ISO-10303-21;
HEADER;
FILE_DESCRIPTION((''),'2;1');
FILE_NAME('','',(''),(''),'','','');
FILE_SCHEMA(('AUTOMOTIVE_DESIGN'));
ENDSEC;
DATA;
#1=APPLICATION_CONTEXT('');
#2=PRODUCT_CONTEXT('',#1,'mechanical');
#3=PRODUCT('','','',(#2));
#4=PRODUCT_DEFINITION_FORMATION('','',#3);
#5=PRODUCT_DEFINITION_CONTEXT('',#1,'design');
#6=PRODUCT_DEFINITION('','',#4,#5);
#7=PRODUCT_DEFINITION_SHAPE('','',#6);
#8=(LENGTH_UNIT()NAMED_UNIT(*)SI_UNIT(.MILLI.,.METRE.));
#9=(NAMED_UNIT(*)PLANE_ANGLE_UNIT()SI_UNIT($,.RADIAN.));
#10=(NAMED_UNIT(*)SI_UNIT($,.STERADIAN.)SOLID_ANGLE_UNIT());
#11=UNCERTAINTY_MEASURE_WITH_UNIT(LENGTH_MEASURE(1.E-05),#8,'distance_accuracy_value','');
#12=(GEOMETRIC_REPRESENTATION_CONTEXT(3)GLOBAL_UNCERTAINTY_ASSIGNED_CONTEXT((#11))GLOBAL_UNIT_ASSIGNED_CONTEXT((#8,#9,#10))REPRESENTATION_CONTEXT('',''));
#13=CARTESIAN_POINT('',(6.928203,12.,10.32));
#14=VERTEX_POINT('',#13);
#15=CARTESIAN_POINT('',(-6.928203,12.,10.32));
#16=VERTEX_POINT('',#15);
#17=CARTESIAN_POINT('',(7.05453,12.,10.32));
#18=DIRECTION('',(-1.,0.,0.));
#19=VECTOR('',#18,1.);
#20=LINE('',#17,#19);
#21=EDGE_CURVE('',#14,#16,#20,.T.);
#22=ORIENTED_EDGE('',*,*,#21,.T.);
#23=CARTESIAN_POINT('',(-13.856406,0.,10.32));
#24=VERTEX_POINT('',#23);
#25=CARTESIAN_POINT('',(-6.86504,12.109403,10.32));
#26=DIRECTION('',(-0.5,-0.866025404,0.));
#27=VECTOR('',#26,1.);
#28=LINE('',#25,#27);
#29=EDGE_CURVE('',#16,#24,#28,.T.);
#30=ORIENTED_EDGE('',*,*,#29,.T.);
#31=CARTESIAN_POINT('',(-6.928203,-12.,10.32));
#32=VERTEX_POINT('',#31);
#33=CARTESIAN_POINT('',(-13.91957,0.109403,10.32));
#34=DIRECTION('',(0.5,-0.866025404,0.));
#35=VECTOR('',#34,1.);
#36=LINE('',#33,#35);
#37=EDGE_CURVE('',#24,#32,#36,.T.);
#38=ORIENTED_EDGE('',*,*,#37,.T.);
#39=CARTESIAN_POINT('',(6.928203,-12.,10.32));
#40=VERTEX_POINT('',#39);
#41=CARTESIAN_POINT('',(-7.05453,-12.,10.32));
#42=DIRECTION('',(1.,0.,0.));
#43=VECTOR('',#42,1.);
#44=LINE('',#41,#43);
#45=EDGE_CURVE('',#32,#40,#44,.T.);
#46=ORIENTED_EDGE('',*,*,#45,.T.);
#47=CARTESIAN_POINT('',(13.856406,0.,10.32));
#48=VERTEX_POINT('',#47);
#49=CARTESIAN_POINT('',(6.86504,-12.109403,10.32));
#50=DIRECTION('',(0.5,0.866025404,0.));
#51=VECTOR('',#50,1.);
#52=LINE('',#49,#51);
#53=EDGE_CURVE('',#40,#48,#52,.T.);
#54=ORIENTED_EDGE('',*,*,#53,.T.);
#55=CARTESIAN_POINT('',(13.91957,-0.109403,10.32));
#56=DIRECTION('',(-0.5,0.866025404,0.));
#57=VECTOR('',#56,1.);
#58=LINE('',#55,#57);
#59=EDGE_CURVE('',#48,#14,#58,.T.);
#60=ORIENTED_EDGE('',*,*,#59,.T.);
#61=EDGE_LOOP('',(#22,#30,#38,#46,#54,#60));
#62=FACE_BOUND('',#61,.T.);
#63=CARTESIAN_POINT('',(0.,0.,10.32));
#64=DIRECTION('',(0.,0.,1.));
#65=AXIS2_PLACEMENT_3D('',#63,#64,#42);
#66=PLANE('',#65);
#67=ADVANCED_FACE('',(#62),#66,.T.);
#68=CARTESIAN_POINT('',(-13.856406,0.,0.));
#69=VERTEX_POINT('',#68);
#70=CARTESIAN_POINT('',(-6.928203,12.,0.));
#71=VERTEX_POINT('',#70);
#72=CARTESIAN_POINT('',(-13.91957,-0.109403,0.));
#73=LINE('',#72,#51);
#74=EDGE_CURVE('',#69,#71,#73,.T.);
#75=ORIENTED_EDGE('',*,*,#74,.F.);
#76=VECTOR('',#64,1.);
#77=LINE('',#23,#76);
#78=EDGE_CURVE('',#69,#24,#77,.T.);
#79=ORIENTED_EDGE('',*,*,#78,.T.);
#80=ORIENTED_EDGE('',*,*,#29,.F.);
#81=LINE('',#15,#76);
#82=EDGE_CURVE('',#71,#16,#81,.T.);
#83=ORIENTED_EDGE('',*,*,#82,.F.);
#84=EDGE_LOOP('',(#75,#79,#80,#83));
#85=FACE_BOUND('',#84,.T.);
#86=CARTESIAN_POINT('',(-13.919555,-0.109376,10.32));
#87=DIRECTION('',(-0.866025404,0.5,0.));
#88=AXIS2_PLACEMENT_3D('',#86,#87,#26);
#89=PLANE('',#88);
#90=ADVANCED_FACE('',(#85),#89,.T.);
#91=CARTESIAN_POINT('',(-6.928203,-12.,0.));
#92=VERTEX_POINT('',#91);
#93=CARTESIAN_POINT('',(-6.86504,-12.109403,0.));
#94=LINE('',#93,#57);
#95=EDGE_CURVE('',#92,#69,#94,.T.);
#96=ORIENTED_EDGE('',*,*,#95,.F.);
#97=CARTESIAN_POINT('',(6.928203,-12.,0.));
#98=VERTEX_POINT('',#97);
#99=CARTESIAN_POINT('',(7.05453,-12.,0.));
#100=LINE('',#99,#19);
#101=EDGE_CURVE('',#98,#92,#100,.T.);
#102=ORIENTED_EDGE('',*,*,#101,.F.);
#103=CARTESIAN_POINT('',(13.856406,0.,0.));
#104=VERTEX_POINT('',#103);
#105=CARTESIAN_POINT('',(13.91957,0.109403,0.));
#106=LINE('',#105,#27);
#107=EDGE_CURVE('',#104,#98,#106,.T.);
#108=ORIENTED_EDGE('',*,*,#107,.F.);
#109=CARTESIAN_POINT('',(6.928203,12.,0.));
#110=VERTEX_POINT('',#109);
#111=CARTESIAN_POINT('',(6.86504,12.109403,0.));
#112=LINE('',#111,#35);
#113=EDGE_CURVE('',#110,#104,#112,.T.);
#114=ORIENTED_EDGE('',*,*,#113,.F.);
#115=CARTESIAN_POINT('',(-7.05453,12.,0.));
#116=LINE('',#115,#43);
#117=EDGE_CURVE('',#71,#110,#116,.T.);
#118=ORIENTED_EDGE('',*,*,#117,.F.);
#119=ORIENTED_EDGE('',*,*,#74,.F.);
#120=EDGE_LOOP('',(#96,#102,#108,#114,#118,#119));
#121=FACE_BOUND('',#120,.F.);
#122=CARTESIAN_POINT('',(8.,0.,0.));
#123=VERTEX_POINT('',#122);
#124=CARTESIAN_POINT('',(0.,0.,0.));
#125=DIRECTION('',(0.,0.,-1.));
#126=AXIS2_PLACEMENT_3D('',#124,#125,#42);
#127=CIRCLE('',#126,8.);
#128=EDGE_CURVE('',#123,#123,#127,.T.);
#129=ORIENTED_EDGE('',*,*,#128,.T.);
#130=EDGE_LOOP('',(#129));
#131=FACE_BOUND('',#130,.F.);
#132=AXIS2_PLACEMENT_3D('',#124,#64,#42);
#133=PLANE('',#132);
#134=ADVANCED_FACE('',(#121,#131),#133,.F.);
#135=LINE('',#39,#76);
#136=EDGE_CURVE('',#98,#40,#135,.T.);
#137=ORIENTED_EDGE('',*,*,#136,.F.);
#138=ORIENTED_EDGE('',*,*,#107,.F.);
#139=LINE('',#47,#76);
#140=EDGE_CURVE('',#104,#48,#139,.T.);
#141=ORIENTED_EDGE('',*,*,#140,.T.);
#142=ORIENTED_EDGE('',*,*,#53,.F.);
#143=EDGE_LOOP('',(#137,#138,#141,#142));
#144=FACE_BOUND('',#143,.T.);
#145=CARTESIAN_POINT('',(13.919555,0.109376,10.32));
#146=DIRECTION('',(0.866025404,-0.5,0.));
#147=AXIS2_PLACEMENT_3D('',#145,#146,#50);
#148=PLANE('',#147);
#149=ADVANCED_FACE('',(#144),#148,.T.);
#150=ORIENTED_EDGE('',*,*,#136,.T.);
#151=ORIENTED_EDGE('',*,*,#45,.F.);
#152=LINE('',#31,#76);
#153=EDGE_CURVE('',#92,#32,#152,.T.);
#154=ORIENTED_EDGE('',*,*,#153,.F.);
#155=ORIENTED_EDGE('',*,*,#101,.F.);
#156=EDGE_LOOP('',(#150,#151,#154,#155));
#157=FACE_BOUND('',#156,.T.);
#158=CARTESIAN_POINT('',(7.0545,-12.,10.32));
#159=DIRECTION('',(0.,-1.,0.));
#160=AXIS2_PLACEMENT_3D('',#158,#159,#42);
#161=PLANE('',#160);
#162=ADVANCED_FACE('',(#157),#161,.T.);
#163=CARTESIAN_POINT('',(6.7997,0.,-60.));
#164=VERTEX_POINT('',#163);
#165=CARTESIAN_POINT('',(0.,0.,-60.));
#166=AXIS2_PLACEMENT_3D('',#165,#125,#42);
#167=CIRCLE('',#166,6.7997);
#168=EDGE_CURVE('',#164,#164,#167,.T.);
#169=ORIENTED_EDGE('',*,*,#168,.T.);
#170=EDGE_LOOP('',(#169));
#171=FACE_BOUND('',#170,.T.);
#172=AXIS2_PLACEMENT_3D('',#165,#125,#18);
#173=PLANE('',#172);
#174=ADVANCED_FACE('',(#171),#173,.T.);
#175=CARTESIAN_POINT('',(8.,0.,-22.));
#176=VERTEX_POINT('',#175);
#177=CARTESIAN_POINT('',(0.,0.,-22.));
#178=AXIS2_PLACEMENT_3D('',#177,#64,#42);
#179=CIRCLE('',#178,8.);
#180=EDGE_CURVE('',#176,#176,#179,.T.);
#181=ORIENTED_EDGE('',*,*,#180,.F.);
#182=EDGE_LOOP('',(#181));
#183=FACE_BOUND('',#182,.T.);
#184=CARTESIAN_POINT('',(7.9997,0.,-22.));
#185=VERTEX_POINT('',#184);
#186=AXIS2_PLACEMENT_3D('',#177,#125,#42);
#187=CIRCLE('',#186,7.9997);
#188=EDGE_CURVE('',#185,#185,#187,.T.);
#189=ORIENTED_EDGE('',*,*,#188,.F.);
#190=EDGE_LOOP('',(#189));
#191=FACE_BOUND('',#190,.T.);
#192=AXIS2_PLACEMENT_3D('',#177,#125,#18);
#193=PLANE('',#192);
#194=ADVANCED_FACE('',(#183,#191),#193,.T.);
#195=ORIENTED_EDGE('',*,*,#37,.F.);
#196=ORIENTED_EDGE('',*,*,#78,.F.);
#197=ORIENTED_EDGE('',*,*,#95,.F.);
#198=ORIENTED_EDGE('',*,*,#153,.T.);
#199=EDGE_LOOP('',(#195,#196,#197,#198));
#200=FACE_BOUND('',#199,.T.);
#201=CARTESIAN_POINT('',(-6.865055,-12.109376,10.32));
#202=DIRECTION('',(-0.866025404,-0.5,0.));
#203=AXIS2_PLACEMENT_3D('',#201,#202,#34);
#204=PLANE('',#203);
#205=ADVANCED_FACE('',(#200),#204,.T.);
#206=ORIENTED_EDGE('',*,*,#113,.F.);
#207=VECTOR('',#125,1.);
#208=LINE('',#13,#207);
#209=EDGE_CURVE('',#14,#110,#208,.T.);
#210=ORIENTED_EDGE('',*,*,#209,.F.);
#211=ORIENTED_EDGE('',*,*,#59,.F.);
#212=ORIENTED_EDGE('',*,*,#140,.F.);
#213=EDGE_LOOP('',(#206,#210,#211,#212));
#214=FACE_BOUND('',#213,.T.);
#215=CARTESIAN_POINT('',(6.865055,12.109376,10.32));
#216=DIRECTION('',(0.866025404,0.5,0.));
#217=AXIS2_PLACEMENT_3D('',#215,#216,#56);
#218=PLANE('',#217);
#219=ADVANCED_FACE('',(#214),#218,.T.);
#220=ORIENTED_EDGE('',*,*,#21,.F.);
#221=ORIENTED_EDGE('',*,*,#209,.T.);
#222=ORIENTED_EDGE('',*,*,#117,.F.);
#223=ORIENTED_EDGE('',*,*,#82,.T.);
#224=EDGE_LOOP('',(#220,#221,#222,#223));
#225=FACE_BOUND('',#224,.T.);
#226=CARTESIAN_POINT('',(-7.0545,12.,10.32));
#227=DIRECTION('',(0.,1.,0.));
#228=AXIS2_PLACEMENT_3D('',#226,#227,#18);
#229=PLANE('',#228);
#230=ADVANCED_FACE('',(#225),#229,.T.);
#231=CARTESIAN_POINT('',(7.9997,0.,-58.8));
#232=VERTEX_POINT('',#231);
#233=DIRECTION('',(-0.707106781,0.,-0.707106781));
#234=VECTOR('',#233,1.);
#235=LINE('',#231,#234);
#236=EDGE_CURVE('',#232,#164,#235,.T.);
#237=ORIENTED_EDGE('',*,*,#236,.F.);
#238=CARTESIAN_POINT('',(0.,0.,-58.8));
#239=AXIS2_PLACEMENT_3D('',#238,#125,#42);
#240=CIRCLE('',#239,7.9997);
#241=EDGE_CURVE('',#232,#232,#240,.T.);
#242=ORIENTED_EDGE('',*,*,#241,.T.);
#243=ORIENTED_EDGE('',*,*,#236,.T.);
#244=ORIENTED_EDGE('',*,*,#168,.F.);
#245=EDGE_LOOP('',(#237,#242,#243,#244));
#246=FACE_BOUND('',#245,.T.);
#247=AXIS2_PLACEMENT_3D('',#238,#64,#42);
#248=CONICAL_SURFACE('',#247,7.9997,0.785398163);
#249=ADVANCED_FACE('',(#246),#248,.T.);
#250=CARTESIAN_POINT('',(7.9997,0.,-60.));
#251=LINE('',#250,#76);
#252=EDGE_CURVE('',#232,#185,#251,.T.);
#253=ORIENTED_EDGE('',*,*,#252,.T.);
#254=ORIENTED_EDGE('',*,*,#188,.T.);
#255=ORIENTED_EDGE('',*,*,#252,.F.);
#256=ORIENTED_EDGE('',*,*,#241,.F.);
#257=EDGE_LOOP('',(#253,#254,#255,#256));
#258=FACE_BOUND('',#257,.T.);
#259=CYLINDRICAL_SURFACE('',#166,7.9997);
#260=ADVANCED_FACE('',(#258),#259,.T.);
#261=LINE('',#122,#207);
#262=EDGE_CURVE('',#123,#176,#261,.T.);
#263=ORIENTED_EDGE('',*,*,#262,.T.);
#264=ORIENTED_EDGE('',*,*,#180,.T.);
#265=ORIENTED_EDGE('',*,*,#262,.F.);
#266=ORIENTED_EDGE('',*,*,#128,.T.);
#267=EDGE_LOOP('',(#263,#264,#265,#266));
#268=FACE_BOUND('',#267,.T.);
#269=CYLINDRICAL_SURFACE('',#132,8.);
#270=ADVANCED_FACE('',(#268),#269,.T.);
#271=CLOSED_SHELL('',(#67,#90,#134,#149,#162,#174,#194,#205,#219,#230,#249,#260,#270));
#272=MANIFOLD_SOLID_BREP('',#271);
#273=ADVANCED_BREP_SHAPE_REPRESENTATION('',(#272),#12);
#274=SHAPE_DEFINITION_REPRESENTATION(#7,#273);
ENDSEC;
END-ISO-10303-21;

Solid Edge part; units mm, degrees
sketch "Sketch1" plane through (0, 0, 0) normal (0, 0, 1) x (1, 0, 0)
  circle A0 centre (0, 0) radius 13.92
  dimension "D1" = 27.84
extrude "Protrusion1" add sketch "Sketch1" along normal blind 10.32
sketch "Sketch2" plane through (0, 0, 0) normal (0, 0, -1) x (1, 0, 0)
  circle A0 centre (0, 0) radius 8
extrude "Protrusion2" add sketch "Sketch2" along normal blind 60
sketch "Sketch3" plane through (0, 0, -60) normal (0, 0, -1) x (1, 0, 0)
  circle A0 centre (0, 0) radius 7.9997
extrude "Cutout1" cut sketch "Sketch3" against normal blind 38 flip side to cut
chamfer "Chamfer_1" distance 1.2 angle 45 1 edges at (-7.9997, 0, -60)
sketch "Sketch4" plane through (0, 0, 10.32) normal (0, 0, 1) x (1, 0, 0)
  line L0 (-7.0545, 12) -> (7.0545, 12)
  dimension "D1" = 24
extrude "Cutout2" cut sketch "Sketch4" against normal up to next material side at (0, 12.05, 10.32)
pattern_circular "Pattern1" count 6 over 360 about axis through (0, 0, 10.32) along (0, 0, 1) of "Cutout2"
properties part number "24104973"
